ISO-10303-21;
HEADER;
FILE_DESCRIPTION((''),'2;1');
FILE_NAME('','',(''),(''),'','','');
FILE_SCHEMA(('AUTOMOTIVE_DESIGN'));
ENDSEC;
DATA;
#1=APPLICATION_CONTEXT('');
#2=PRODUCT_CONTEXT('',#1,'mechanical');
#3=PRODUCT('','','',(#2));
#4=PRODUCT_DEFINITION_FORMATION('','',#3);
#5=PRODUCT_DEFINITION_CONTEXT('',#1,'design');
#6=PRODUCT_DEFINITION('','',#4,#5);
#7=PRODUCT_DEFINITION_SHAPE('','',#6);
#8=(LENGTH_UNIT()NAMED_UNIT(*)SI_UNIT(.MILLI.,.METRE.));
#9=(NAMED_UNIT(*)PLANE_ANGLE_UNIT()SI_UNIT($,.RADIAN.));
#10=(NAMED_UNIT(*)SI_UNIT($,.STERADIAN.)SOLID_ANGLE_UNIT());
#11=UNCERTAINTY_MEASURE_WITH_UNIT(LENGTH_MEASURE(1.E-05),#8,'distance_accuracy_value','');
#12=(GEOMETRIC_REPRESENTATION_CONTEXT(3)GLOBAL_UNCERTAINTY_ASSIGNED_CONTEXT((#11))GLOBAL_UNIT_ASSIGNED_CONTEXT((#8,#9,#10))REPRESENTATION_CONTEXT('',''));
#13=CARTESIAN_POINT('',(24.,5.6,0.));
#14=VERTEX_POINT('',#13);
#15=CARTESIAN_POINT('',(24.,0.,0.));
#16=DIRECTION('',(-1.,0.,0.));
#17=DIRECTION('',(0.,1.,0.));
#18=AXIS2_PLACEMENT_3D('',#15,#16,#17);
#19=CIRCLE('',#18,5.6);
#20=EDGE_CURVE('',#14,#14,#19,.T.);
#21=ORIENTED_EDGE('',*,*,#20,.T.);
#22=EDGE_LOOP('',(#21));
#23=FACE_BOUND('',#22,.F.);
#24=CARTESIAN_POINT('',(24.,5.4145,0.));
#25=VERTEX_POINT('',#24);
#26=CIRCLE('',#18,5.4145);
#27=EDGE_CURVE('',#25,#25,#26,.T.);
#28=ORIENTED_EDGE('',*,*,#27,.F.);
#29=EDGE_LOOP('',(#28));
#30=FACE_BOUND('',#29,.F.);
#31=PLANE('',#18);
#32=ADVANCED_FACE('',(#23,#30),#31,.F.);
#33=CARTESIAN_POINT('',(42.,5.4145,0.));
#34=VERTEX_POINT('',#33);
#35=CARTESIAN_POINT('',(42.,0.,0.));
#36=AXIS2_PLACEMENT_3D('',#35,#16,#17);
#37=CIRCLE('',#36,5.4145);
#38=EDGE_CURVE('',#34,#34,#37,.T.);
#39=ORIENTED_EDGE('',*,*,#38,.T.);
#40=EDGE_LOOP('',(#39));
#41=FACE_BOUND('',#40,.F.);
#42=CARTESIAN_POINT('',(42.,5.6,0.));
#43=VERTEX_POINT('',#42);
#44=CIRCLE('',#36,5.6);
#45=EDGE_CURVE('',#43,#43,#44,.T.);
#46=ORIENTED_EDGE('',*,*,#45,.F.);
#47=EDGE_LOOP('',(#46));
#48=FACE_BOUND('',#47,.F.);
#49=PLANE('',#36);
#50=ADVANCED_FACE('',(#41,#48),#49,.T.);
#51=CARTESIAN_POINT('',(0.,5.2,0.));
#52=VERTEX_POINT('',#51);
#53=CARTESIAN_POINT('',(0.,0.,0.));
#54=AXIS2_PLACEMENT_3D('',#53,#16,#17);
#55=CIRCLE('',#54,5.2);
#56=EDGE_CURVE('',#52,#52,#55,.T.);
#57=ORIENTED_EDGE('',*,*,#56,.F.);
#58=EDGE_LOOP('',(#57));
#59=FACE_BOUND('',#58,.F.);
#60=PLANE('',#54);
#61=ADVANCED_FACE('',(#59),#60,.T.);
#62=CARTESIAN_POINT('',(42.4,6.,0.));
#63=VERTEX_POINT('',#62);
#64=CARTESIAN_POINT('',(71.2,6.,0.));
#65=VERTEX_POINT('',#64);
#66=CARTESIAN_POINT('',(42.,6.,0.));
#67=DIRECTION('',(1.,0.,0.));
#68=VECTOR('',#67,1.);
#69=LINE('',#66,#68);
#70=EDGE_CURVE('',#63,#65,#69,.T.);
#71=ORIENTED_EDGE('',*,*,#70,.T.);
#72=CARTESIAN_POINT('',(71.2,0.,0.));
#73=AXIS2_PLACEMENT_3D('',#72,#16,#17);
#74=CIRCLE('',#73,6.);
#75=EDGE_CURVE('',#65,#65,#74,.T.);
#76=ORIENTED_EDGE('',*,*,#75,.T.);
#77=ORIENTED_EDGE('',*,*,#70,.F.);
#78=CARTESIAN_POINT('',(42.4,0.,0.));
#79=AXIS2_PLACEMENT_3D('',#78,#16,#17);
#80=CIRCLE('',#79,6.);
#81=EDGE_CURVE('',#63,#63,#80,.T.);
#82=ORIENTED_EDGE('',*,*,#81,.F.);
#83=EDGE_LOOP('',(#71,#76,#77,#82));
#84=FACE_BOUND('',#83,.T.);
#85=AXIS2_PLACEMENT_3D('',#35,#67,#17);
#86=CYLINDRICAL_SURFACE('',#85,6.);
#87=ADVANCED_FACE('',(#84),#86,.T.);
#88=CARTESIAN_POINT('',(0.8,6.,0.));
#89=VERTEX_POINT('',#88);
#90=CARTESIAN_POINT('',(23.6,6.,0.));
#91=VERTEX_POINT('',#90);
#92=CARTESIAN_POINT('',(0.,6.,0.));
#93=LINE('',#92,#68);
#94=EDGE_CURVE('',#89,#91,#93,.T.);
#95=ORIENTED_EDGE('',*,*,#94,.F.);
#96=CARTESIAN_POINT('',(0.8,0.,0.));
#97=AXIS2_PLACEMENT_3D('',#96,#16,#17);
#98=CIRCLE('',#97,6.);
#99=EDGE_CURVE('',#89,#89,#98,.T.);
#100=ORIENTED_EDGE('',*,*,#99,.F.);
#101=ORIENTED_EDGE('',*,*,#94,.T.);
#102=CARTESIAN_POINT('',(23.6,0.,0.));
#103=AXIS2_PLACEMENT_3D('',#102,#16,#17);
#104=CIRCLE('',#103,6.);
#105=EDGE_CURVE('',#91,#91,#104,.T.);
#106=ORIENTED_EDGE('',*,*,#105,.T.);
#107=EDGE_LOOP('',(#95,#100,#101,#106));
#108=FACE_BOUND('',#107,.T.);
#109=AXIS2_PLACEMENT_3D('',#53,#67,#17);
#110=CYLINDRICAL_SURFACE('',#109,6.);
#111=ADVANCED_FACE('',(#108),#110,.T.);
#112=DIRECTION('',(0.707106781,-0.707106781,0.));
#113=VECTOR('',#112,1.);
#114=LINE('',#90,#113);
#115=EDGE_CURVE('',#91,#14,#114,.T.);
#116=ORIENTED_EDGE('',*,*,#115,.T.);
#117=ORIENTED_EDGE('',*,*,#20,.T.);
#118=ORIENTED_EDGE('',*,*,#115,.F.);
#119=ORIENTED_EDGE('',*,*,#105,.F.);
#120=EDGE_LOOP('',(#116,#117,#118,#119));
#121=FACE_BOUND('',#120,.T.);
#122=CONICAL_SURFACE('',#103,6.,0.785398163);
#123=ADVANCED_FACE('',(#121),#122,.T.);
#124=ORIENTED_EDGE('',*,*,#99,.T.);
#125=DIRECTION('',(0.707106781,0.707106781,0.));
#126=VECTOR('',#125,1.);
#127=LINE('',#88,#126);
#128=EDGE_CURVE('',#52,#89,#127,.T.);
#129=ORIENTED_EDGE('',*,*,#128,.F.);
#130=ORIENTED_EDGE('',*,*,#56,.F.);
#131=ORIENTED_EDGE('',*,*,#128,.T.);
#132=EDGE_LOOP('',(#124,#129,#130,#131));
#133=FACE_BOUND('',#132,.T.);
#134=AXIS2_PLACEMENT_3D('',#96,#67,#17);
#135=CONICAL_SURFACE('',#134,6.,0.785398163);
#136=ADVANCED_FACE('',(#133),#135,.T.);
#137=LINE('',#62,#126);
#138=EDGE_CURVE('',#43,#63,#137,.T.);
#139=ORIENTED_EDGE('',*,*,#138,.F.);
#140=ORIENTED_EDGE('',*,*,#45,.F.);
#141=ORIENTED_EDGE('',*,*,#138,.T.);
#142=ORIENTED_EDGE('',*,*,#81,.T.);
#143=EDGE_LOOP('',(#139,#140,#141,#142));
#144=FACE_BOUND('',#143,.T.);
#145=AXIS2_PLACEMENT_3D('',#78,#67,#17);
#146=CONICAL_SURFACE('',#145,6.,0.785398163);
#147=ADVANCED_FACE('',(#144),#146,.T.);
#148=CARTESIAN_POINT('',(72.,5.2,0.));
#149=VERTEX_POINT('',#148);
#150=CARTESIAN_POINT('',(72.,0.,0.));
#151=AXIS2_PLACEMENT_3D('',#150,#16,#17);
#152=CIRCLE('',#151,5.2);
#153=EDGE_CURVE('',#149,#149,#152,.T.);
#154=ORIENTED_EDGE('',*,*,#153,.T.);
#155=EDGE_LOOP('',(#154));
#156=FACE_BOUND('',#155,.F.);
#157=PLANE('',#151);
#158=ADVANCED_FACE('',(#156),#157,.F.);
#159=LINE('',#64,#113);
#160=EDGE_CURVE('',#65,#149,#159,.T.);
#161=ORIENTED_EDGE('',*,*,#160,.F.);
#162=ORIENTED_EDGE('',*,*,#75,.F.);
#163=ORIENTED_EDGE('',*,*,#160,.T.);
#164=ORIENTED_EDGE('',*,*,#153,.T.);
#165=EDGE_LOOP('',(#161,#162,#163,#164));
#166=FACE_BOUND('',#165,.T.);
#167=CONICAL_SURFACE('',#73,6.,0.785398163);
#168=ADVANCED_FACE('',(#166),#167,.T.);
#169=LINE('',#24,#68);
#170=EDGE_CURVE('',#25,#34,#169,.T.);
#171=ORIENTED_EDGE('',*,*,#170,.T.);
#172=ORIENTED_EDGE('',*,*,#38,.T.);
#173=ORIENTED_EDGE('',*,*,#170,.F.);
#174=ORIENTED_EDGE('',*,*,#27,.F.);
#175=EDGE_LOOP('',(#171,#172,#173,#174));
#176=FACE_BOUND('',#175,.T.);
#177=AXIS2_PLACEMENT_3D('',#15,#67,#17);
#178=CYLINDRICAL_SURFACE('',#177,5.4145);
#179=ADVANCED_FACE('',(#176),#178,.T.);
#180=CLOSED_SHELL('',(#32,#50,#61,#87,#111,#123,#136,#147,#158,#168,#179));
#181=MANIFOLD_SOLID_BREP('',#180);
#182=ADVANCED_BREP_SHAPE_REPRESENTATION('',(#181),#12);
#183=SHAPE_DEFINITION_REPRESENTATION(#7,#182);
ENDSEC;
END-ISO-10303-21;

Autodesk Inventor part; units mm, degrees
ref_plane "YZ Plane" through (0, 0, 0) normal (1, 0, 0) x (0, 1, 0)
ref_plane "XZ Plane" through (0, 0, 0) normal (0, 1, 0) x (-1, 0, 0)
sketch "Sketch1" plane through (0, 0, 0) normal (0, 0, 1) x (1, 0, 0)
  line L0 (0, 0) -> (0, 6)
  line L1 (0, 6) -> (24, 6)
  line L2 (24, 6) -> (24, 5.4145)
  line L3 (24, 5.4145) -> (42, 5.4145)
  line L4 (42, 5.4145) -> (42, 6)
  line L5 (42, 6) -> (72, 6)
  line L6 (72, 6) -> (72, 0)
  line L7 (72, 0) -> (0, 0)
  dimension "d1" = 12
  dimension "d3" = 10.829
  dimension "d4" = 24
  dimension "d5" = 48
  dimension "d6" = 30
revolve "Вращение1" add sketch "Sketch1" angle 360 about axis through (72, 0, 0) along (-1, 0, 0)
thread "Резьба1" size "M12x1.75" class "6g" standard "ISO Metric profile" length 24
thread "Резьба2" size "M12x1.75" class "6g" standard "ISO Metric profile" length 30
chamfer "Фаска1" distance 0.8 angle 45 2 edges at (0, -6, 0) (72, -6, 0)
chamfer "Фаска2" distance 0.4 angle 45 2 edges at (24, -6, 0) (42, -6, 0)
ref_plane "Work Plane1" through (24, 0, 0) normal (1, 0, 0) x (0, 1, 0)
sketch "Sketch2" plane through (24, 0, 0) normal (1, 0, 0) x (0, 1, 0)
  circle A0 centre (0, 0) radius 6
  point P0 (0, 0)
  dimension "d35" = 12
boundary_patch "Участок поверхности1"
equation "\"d8\" = d4"
equation "\"d29\" = b"
equation "\"d31\" = C_"
equation "\"d37\" = C2_"
equation "\"d1\" = d"
equation "\"d3\" = d2"
equation "\"d4\" = b1"
equation "\"d5\" = L"
equation "\"d6\" = b"
equation "\"d35\" = d"
equation "\"C_\" = 0.8"
equation "\"d\" = 12"
equation "\"d2\" = 10.829"
equation "\"b1\" = 24"
equation "\"L\" = 48"
equation "\"b\" = 30"
equation "\"d34\" = -b1"
equation "\"C2_\" = 0.4"
equation "\"Grip_Length\" = 18"
properties part number "Шпилька 2 M12-6g×48 ГОСТ 22038-76" material "Сталь, мягкая"
